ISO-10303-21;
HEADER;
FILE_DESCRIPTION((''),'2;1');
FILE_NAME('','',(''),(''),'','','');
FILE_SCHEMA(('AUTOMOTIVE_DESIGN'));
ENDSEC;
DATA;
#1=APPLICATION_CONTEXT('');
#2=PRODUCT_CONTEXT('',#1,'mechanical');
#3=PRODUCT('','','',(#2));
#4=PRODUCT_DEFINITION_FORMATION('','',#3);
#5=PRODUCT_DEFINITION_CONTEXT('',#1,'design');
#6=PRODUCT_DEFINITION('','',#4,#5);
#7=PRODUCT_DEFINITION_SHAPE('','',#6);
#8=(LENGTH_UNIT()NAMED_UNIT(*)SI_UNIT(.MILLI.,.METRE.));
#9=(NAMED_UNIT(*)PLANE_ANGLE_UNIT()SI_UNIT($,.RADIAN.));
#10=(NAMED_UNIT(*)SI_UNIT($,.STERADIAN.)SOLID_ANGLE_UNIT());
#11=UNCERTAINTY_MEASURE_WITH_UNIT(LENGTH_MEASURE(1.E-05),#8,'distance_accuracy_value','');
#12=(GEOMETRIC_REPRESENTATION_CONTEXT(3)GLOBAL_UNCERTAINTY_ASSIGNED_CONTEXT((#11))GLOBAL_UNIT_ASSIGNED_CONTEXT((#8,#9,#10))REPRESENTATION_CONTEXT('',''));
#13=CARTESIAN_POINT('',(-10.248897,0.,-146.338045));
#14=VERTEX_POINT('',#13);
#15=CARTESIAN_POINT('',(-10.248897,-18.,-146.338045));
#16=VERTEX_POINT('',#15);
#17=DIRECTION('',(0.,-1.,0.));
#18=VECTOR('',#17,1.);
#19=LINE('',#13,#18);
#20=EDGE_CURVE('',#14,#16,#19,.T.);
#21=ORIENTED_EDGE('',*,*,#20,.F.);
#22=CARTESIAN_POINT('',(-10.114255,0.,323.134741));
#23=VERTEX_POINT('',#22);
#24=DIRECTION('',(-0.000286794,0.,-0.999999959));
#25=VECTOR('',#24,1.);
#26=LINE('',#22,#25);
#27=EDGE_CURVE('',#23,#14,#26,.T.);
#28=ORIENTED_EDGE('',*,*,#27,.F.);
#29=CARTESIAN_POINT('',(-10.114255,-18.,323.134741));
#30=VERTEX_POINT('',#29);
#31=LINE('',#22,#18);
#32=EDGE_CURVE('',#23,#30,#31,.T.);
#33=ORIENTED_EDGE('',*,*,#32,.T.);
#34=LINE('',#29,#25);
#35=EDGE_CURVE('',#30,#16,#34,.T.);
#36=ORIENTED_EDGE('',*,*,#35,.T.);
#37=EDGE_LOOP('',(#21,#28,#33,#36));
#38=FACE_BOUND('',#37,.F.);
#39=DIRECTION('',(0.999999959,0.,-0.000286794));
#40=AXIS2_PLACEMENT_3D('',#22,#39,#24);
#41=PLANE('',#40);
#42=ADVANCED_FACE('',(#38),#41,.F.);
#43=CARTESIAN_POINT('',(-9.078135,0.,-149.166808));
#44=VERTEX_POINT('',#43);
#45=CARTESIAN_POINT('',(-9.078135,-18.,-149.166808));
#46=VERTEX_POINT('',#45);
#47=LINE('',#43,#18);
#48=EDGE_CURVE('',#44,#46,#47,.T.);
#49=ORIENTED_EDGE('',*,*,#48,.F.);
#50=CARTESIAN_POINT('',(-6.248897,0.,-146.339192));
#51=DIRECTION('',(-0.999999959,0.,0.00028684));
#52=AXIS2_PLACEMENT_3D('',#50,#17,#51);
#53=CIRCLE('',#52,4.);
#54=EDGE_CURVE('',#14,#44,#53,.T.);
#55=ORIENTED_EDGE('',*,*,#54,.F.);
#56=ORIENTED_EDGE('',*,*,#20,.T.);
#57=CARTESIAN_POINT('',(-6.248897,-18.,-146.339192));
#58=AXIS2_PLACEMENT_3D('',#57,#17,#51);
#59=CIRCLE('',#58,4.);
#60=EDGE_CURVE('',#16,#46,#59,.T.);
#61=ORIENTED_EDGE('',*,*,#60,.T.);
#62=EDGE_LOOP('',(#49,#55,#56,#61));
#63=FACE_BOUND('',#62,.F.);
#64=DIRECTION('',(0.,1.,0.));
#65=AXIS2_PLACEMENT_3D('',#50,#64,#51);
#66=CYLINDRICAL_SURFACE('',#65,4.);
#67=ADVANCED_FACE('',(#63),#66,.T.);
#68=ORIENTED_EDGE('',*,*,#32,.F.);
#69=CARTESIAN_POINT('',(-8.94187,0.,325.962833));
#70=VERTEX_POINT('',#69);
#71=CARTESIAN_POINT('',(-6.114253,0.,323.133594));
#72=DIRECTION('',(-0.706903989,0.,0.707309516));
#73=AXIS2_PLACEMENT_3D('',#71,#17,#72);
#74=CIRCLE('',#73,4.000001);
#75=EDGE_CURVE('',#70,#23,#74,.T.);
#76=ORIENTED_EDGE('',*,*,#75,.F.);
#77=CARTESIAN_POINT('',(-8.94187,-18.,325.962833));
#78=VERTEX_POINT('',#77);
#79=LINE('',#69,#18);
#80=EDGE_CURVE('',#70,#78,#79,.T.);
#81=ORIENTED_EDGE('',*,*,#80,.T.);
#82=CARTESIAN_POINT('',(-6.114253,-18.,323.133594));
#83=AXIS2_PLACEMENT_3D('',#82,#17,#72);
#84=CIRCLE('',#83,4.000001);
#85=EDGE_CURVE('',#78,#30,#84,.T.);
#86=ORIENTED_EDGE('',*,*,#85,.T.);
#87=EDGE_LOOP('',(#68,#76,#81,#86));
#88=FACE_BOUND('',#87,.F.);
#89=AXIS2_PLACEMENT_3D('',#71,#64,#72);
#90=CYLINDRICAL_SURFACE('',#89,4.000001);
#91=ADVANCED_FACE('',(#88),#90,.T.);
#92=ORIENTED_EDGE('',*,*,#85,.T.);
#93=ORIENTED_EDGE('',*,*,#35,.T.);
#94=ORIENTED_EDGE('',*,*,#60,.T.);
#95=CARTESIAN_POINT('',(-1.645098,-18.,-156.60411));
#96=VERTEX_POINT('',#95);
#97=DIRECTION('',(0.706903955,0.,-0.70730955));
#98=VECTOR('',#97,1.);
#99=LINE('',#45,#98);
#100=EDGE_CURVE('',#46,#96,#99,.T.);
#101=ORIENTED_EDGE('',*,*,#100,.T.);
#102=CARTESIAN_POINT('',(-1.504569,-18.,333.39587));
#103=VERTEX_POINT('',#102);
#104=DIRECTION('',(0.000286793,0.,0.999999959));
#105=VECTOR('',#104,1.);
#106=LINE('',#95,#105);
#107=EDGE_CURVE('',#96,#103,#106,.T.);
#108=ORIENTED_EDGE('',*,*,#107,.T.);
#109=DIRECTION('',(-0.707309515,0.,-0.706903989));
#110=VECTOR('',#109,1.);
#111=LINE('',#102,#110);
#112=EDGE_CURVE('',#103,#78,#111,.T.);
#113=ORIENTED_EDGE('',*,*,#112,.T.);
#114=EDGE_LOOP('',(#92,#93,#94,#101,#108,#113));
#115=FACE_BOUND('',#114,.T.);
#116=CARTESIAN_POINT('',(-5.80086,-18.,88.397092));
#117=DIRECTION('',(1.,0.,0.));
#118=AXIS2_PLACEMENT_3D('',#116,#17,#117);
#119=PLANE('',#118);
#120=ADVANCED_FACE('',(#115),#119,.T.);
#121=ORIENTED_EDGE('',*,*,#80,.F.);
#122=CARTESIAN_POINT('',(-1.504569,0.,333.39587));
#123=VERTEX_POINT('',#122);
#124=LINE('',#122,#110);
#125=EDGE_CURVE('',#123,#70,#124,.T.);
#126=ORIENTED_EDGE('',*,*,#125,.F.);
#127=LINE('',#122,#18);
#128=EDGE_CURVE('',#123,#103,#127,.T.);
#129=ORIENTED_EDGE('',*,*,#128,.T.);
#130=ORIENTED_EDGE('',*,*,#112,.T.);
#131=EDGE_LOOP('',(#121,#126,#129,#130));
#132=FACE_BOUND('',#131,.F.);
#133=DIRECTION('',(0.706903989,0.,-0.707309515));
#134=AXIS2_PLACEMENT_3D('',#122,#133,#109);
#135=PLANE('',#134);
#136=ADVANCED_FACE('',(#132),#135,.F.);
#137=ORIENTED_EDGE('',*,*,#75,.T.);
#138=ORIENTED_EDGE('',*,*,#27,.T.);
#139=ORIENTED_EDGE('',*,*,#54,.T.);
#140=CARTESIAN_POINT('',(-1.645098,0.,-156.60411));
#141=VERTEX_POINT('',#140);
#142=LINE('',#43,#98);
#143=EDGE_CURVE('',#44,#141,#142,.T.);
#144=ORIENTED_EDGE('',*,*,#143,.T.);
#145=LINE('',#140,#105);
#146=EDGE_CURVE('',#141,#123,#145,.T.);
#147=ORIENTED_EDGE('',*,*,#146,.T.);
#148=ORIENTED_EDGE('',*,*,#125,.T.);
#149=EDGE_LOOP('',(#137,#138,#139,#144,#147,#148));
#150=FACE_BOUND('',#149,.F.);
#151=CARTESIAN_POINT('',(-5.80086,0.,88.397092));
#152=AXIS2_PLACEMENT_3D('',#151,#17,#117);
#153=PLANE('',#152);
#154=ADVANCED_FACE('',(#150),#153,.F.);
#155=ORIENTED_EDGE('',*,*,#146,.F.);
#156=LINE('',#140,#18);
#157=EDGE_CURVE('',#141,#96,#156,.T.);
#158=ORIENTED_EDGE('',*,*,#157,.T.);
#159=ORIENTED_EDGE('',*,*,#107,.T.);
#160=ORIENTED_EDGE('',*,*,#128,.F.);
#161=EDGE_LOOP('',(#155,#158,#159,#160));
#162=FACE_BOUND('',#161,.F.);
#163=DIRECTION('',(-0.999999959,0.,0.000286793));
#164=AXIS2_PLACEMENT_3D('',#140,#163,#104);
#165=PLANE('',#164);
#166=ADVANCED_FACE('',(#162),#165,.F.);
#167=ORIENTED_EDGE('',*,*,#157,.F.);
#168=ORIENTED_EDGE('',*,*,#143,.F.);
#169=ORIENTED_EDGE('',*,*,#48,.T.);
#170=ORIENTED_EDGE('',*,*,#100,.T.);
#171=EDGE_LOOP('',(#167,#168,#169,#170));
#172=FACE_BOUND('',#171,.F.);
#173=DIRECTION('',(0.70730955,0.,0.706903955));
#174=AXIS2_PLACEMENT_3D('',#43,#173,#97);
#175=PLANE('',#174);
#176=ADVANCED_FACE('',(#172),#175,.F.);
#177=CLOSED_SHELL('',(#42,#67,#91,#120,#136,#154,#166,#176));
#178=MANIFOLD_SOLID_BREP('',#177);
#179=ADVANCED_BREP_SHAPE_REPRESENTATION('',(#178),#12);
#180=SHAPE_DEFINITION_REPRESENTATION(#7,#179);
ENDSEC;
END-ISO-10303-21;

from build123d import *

# Parameters (mm, degrees)
F1_DEPTH = 18


# Not quite as in the source:
# - ends of sketch curves that miss each other by under 0.0002 mm in the source are joined


with BuildPart() as f1:
    # F0 (on Front) → F1 (new body)
    with BuildSketch(Plane.XZ):
        with BuildLine():
            ThreePointArc((-10.2488967252, -146.3380451174), (-9.9448538694, -147.8688662998), (-9.0781349308, -149.1668084527))
            Line((-9.0781349308, -149.1668084527), (-1.6450976958, -156.604110485))
            Line((-1.6450976958, -156.604110485), (-1.5045689609, 333.3958698635))
            Line((-1.5045689609, 333.3958698635), (-8.9418702467, 325.9628326518))
            ThreePointArc((-8.9418702467, 325.9628326518), (-9.8093334866, 324.6653878578), (-10.1142545458, 323.1347414317))
            Line((-10.1142545458, 323.1347414317), (-10.2488967252, -146.3380451174))
        make_face()
    extrude(amount=F1_DEPTH)


solid = f1.part
